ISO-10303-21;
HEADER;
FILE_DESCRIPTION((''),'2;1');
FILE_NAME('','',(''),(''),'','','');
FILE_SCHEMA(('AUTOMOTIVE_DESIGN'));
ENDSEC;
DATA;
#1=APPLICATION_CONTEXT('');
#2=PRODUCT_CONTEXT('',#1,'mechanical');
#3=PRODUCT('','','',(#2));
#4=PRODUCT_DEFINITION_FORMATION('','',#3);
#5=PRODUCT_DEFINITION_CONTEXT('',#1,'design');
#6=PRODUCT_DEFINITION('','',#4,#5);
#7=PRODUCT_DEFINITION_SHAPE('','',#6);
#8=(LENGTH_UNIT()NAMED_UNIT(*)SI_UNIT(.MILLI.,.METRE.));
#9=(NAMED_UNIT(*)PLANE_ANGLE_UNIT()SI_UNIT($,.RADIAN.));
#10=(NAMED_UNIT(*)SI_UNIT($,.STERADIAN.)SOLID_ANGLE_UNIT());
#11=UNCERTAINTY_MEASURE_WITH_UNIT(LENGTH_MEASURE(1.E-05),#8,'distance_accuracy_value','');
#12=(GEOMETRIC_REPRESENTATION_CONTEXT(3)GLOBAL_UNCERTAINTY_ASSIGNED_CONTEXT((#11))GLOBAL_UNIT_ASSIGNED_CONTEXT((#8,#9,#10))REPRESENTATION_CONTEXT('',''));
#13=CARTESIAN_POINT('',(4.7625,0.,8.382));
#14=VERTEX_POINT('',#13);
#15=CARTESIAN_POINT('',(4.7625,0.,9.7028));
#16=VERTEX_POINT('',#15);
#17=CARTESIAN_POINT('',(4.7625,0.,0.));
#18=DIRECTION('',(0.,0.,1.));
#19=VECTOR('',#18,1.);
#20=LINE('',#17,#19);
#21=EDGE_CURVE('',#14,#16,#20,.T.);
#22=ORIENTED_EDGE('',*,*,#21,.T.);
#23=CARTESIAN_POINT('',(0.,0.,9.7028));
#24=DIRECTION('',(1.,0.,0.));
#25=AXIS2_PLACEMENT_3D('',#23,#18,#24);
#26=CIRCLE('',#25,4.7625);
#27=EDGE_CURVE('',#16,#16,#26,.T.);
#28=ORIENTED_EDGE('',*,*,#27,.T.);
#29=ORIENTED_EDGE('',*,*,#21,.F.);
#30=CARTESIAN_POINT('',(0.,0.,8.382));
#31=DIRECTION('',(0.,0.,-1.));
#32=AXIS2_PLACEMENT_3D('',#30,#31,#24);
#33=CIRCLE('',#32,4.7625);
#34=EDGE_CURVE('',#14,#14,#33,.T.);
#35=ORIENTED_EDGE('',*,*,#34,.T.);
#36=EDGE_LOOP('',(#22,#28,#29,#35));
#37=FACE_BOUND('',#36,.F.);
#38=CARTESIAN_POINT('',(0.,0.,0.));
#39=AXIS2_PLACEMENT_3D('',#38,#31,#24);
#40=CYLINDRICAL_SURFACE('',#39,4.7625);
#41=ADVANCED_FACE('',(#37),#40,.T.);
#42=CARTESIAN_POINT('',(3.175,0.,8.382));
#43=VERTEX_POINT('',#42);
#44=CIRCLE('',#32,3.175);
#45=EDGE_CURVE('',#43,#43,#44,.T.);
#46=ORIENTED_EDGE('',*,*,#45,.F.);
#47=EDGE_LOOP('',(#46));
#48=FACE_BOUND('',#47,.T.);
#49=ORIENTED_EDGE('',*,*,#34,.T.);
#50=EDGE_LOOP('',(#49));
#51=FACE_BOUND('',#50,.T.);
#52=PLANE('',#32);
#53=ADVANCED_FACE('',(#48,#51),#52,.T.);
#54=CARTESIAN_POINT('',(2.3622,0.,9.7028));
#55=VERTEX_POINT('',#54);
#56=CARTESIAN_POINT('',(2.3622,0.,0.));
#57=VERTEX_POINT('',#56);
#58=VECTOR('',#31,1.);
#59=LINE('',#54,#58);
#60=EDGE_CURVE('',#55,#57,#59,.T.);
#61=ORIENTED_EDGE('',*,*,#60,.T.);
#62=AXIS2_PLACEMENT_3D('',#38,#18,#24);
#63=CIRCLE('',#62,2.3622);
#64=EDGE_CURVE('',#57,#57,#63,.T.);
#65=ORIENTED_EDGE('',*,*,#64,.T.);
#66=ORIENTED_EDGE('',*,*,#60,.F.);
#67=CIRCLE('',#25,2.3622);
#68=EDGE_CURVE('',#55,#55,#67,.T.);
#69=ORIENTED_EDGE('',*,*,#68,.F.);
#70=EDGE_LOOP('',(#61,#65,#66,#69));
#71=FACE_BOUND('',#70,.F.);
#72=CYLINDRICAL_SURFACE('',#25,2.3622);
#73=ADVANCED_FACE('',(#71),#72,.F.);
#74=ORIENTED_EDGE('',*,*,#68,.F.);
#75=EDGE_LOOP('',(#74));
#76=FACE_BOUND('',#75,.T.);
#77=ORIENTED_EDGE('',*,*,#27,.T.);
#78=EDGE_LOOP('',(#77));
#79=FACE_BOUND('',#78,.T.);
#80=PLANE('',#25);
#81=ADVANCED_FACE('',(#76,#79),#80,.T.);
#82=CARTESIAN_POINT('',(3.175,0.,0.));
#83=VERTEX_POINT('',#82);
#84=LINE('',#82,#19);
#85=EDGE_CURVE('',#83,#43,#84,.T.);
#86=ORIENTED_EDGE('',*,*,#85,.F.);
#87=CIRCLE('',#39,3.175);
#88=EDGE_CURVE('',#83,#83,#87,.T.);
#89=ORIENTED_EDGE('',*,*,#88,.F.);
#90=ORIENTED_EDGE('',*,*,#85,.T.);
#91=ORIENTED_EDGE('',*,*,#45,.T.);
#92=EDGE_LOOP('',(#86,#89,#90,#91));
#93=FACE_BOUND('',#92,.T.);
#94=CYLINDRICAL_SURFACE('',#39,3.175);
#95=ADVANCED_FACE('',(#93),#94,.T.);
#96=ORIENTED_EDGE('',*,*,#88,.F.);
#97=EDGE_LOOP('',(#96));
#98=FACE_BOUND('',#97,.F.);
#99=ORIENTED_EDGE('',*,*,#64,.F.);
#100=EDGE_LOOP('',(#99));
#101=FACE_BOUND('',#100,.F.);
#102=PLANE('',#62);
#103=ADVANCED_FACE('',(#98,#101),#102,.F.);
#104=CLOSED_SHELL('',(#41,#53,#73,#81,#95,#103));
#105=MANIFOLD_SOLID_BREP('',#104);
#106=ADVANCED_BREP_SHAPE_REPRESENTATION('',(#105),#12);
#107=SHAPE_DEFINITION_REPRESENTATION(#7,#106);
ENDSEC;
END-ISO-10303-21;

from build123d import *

# Parameters (mm, degrees)
F0_R     = 4.7625
F1_DEPTH = 9.7028
F2_R     = 2.3622
F3_DEPTH = 9.7028
F4_R     = 4.7625
F4_R_2   = 3.175
F5_DEPTH = 8.382


with BuildPart() as f1:
    # F0 (on Top) → F1 (new body)
    with BuildSketch(Plane.XY):
        Circle(F0_R)
    extrude(amount=F1_DEPTH)

    # F2 (on face) → F3 (cut, through all)
    with BuildSketch(Plane.XY.offset(9.7028)):
        Circle(F2_R)
    extrude(amount=-F3_DEPTH, mode=Mode.SUBTRACT)

    # F4 (on face) → F5 (cut)
    with BuildSketch(Plane(origin=(0, 0, 0), x_dir=(1, 0, 0), z_dir=(0, 0, -1))):
        Circle(F4_R)
        Circle(F4_R_2, mode=Mode.SUBTRACT)
    extrude(amount=-F5_DEPTH, mode=Mode.SUBTRACT)


solid = f1.part
